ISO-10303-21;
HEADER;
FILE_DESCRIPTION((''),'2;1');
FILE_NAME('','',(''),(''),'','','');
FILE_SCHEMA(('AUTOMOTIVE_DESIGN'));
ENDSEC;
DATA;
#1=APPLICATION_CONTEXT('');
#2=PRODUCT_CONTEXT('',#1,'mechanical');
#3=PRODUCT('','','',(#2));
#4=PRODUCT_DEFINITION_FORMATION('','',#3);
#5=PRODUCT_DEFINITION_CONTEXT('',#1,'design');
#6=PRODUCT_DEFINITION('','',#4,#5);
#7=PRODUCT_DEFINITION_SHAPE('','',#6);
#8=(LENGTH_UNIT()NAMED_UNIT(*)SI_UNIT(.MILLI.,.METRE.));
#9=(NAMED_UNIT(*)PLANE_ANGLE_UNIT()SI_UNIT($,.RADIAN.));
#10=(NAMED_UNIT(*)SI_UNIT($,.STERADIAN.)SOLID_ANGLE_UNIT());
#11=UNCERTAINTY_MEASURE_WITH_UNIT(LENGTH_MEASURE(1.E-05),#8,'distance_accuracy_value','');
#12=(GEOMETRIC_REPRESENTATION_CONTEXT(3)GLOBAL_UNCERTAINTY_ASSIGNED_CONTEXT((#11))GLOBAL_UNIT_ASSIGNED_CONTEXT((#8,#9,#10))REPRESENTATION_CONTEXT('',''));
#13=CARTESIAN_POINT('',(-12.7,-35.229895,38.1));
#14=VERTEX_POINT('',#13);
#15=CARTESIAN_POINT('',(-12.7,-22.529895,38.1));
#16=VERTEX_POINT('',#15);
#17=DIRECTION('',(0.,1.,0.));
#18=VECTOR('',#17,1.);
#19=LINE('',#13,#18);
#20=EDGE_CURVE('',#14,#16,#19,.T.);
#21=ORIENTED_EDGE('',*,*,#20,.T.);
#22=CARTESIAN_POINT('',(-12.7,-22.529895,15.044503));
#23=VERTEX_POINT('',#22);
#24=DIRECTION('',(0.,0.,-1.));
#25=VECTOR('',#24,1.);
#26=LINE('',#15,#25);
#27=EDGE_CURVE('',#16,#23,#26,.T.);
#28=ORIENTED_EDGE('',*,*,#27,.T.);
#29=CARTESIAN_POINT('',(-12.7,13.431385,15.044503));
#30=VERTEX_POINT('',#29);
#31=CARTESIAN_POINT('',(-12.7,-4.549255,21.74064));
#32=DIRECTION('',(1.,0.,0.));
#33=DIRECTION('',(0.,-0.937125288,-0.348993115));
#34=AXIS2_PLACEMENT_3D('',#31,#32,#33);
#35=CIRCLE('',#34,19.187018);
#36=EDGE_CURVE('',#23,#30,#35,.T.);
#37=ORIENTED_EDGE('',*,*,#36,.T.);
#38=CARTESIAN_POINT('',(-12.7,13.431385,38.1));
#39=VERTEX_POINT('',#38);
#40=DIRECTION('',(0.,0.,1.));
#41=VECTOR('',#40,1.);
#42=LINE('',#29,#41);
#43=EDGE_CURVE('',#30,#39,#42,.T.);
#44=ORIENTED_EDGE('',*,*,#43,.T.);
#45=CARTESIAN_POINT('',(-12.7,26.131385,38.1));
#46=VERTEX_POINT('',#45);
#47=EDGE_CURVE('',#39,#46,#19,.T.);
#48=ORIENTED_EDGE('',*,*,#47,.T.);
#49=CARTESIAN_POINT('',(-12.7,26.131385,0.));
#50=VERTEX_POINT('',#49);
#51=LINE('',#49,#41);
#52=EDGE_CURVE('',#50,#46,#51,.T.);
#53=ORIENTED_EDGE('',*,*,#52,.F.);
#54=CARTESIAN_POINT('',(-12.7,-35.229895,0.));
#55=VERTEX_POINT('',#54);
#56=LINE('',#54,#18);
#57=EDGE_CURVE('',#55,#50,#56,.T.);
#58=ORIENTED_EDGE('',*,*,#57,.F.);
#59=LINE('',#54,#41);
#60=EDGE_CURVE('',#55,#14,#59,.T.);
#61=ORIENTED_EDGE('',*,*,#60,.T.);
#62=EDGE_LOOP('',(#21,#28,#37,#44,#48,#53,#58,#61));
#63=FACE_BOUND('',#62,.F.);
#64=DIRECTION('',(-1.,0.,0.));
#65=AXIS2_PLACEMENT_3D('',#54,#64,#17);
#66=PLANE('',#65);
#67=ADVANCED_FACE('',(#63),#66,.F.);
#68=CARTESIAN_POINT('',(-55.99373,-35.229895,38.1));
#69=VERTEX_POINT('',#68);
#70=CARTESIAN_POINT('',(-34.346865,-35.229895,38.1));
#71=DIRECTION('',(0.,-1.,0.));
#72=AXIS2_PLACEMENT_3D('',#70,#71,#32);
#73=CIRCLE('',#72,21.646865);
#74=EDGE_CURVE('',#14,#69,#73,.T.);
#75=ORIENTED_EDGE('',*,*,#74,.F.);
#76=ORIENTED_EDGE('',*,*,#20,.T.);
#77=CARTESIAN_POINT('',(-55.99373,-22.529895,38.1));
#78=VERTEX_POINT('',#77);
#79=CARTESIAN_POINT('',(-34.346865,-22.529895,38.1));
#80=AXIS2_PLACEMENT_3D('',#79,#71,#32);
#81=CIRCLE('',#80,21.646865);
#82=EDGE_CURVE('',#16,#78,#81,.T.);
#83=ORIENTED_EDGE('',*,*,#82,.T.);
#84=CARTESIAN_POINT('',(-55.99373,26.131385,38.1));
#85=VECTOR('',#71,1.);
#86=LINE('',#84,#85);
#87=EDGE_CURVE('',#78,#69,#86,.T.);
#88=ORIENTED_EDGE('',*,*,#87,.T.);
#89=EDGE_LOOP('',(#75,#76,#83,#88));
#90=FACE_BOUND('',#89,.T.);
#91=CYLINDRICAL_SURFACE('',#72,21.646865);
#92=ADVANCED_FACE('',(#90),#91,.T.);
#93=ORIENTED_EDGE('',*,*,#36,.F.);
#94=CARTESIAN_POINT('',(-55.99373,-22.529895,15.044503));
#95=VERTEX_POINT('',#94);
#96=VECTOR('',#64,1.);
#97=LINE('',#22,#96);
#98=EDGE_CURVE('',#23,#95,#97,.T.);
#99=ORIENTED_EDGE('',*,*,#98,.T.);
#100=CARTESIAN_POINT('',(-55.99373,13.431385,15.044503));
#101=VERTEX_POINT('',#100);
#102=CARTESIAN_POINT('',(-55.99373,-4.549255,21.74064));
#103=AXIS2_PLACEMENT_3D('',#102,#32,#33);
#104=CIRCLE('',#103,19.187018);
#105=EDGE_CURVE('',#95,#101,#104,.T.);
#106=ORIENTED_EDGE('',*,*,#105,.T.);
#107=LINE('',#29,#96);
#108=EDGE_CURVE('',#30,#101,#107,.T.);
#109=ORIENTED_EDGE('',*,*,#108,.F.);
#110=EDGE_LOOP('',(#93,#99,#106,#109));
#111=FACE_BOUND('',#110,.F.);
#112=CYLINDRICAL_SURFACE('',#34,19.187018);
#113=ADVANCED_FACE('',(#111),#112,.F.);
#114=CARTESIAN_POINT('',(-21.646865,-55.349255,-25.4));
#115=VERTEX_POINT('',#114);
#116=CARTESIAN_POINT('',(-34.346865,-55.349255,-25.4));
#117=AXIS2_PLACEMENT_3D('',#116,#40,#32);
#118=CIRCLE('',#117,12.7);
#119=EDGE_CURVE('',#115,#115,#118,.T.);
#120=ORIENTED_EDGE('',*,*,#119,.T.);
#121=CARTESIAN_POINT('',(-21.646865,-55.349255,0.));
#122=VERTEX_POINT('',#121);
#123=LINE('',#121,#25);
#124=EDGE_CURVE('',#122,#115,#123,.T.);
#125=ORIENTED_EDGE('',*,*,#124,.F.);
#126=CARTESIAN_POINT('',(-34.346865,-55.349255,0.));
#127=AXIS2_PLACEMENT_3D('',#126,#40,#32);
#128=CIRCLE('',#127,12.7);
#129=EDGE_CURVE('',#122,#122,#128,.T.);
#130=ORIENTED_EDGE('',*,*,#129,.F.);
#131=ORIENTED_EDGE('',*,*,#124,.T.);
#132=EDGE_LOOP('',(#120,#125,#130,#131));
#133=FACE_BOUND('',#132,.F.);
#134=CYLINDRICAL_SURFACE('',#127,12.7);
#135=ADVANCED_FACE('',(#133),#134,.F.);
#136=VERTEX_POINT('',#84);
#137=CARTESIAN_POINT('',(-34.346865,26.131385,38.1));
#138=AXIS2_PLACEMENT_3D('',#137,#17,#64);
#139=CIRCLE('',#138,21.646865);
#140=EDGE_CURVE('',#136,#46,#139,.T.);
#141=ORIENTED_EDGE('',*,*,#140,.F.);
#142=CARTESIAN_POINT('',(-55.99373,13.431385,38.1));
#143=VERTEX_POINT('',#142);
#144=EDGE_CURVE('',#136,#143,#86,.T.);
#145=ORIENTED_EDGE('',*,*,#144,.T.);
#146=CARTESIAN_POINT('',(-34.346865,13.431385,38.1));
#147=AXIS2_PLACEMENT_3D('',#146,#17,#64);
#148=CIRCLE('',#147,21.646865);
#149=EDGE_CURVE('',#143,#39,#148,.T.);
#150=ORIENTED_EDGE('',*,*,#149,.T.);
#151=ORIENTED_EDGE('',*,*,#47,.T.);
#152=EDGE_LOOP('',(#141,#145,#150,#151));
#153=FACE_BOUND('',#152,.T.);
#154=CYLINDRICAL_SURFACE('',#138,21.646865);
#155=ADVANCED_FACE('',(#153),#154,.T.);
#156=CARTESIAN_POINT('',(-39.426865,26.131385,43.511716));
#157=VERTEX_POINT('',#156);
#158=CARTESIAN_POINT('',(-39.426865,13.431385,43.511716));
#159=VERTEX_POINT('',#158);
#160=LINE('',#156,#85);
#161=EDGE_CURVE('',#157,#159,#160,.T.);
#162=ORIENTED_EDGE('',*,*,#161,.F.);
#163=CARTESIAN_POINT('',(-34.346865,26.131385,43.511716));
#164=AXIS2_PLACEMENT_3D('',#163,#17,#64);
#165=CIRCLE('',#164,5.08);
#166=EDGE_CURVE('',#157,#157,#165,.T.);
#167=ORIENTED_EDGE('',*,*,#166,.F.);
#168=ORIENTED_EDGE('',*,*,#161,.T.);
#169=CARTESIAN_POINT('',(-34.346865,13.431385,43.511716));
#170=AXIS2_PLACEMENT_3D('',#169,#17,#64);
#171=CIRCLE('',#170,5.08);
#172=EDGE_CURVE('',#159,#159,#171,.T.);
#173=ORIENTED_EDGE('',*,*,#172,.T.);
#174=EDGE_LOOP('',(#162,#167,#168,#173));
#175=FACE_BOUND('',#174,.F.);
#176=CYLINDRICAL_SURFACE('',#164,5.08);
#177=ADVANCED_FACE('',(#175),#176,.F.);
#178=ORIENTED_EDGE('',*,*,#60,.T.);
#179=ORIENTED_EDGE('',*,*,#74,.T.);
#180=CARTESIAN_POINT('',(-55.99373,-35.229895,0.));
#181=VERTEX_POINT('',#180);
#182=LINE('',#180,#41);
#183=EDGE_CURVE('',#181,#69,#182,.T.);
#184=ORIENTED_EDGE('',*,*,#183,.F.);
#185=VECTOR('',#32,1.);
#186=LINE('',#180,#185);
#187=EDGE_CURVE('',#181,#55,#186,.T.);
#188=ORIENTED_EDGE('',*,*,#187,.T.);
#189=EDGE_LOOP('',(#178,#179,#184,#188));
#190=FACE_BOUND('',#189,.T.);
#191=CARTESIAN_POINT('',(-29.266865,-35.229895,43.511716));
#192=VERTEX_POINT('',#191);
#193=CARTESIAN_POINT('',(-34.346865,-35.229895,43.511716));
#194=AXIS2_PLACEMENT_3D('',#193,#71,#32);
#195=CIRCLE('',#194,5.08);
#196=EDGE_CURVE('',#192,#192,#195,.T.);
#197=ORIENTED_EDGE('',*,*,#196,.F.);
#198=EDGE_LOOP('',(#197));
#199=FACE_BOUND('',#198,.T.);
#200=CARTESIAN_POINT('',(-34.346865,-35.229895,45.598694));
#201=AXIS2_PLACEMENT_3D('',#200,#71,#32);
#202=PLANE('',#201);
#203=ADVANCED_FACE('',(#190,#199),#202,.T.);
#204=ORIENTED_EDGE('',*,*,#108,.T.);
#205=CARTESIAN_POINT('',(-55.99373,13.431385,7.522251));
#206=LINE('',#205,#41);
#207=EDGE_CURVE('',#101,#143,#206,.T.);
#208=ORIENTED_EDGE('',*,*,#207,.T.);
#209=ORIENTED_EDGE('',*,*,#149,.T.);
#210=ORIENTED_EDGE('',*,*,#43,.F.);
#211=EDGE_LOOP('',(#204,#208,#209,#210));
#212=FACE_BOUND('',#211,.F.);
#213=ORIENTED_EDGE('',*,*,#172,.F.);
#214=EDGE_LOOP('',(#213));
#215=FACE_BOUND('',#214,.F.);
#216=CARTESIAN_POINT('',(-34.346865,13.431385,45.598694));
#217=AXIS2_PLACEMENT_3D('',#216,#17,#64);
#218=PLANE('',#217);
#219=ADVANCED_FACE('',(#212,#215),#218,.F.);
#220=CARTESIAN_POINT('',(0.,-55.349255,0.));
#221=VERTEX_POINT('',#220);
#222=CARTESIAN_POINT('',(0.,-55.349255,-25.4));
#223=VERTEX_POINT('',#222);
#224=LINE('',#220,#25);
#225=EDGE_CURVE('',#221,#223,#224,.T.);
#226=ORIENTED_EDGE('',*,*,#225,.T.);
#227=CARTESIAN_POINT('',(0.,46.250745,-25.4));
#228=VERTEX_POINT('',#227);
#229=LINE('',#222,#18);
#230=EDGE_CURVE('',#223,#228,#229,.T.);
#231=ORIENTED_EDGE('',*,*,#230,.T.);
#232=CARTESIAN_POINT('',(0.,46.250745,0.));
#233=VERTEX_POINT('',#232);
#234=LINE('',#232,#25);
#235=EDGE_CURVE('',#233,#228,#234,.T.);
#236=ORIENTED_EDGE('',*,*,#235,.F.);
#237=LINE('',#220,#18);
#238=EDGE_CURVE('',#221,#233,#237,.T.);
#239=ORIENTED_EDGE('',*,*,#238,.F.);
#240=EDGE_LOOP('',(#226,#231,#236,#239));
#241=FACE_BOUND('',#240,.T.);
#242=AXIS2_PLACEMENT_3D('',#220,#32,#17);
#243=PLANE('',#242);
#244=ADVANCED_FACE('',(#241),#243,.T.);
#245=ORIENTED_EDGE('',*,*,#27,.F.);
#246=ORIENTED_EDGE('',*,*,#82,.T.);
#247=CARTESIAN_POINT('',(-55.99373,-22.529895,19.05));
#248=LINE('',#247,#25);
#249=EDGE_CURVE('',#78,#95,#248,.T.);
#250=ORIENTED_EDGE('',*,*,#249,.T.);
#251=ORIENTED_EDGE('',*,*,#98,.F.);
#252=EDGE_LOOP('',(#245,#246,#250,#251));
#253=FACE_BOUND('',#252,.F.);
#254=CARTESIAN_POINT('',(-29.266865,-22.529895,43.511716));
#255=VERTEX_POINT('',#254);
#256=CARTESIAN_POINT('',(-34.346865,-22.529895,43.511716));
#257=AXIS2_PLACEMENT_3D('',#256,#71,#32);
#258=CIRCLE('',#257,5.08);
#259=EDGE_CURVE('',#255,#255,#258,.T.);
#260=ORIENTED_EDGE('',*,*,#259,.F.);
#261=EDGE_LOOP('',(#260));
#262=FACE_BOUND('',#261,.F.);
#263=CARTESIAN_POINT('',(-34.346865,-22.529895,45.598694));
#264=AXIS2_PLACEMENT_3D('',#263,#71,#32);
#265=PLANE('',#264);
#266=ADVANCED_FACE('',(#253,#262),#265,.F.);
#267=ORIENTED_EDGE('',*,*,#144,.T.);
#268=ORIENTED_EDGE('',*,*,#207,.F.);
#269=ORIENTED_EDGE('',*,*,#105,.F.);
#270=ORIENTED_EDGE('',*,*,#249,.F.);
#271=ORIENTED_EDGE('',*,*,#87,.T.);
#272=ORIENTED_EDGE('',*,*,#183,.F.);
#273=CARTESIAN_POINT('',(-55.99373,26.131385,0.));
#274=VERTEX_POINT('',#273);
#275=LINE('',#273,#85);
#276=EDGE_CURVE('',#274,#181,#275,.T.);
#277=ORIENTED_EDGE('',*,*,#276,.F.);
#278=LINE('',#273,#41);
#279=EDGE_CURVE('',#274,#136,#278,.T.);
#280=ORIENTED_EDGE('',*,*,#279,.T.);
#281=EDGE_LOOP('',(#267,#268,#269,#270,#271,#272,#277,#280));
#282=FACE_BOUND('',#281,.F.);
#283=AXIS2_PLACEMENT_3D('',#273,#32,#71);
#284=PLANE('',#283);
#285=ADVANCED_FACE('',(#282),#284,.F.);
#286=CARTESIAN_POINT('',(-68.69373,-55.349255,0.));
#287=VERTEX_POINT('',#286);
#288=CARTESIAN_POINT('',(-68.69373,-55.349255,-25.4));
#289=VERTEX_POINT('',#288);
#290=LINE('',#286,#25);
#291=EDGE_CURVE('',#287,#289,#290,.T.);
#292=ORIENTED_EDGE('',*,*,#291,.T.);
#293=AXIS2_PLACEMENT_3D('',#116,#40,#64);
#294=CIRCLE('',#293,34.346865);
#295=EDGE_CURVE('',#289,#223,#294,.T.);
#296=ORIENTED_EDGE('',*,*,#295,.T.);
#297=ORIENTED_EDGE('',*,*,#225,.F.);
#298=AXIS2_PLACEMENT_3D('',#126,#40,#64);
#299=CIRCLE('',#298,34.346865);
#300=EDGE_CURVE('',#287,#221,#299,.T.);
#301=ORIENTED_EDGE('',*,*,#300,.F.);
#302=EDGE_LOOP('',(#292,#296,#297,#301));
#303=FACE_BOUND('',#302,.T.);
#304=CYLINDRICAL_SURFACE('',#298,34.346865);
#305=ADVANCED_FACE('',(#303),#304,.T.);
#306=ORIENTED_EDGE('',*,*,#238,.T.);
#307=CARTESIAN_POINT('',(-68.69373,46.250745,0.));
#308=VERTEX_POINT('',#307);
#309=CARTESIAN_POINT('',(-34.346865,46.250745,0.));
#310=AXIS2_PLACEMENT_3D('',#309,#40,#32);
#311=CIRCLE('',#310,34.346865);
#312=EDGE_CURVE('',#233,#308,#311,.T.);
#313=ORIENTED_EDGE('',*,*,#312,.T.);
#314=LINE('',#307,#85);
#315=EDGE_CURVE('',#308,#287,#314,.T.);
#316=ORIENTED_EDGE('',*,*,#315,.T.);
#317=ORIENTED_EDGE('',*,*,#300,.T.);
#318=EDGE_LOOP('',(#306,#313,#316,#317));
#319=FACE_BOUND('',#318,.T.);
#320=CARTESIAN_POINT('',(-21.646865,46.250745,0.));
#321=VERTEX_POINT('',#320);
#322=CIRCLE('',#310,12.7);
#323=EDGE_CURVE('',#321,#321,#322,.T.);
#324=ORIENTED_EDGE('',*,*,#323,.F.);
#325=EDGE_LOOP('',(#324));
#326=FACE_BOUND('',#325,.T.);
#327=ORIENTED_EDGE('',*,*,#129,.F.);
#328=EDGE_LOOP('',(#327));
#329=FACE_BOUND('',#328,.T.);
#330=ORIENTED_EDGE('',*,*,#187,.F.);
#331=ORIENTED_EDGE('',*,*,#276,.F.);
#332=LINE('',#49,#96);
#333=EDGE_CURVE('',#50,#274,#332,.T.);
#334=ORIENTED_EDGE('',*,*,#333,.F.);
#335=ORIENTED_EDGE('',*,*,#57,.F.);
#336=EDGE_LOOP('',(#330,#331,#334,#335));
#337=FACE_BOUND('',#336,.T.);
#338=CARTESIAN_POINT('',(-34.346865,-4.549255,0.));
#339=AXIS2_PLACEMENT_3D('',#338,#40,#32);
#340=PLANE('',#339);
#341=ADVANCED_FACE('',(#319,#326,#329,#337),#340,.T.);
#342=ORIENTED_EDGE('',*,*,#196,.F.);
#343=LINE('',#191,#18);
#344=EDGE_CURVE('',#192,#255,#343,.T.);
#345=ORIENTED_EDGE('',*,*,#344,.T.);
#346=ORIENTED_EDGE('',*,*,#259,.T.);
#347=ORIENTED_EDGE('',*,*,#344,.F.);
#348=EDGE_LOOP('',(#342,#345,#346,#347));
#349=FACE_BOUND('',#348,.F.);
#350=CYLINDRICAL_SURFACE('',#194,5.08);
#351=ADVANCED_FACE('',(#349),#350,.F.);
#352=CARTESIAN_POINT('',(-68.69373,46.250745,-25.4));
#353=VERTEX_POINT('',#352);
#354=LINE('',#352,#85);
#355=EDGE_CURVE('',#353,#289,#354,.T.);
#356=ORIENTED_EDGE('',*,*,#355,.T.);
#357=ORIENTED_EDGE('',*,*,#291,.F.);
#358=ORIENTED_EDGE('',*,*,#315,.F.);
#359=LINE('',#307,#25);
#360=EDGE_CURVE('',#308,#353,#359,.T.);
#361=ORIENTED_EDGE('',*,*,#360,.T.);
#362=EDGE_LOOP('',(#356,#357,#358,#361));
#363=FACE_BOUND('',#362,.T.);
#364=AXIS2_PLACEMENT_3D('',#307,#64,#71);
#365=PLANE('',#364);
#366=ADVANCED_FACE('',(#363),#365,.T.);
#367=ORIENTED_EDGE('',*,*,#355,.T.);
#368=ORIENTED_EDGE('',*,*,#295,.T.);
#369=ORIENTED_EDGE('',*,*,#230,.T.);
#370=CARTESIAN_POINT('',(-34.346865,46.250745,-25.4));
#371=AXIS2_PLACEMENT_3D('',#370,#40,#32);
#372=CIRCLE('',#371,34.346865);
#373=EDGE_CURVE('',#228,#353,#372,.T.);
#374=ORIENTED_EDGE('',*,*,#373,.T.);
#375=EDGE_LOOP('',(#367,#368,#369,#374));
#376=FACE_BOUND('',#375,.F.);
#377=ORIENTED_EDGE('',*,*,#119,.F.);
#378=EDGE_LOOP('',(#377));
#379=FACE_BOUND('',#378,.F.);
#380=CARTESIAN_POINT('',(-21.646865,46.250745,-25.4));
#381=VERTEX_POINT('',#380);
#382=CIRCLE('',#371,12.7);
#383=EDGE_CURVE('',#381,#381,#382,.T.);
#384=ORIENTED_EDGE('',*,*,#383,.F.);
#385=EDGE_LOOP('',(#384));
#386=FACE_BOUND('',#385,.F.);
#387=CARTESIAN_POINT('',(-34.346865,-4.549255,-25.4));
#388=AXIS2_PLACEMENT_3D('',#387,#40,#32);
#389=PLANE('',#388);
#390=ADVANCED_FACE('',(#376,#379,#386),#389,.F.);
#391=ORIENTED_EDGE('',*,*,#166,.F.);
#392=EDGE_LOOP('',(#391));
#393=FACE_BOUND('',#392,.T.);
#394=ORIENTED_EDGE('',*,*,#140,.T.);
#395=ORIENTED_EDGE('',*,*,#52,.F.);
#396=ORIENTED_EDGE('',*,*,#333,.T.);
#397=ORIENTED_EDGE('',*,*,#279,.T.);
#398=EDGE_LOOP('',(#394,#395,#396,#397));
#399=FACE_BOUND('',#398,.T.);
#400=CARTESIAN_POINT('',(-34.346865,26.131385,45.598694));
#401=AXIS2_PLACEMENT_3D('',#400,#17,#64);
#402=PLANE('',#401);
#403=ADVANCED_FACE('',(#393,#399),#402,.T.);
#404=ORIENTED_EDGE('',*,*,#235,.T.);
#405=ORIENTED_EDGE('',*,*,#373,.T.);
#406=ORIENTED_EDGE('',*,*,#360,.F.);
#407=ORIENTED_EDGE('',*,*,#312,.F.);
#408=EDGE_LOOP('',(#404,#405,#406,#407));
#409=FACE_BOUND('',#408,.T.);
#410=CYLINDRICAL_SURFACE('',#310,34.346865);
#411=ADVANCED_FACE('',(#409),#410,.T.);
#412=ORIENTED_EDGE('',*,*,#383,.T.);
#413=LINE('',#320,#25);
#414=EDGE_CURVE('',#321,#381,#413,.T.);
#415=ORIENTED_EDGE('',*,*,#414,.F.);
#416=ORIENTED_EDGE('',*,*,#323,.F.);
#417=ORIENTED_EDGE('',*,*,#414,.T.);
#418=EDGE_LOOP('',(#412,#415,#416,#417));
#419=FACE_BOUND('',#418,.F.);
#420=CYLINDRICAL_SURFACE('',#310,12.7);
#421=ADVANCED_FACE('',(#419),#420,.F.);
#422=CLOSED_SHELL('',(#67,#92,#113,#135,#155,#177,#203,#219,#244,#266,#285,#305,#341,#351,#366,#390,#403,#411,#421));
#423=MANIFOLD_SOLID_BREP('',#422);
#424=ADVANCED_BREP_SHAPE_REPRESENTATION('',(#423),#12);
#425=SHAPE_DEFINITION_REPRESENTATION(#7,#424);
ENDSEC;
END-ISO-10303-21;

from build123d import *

# Parameters (mm, degrees)
F0_R     = 12.7
F1_DEPTH = 25.4
F3_DEPTH = 38.1
F5_DEPTH = 69.088
F7_R     = 5.08
F8_DEPTH = 12.7
F6_R     = 5.08
F9_DEPTH = 12.7


# Not quite as in the source:
# - a feature names something its author has since deleted; it is built from what else it names


with BuildPart() as f1:
    # F0 (on Top) → F1 (new body)
    with BuildSketch(Plane.XY):
        with BuildLine():
            Line((0, -55.3492553601), (0, 0))
            Line((0, 0), (0, 46.2507446399))
            ThreePointArc((0, 46.2507446399), (-34.3468652373, 80.5976098772), (-68.6937304746, 46.2507446399))
            Line((-68.6937304746, 46.2507446399), (-68.6937304746, -55.3492553601))
            ThreePointArc((-68.6937304746, -55.3492553601), (-34.3468652373, -89.6961205974), (0, -55.3492553601))
        make_face()
        with Locations((-34.3468652373, -55.3492553601)):
            Circle(F0_R, mode=Mode.SUBTRACT)
        with Locations((-34.3468652373, 46.2507446399)):
            Circle(F0_R, mode=Mode.SUBTRACT)
    extrude(amount=-F1_DEPTH)

    # F2 (on face) → F3 (join)
    with BuildSketch(Plane.XY):
        Polygon((-55.9937304746, 26.1313845437), (-55.9937304746, -4.5492553601), (-55.9937304746, -35.2298952639), (-12.7, -35.2298952639), (-12.7, -4.5492553601), (-12.7, 26.1313845437), align=None)
    extrude(amount=F3_DEPTH)

    # F4 (on face) → F5 (cut)
    with BuildSketch(Plane.YZ.offset(-12.7)):
        with BuildLine():
            Line((13.4313845437, 38.1), (-22.5298952639, 38.1))
            Line((-22.5298952639, 38.1), (-22.5298952639, 15.044502914))
            ThreePointArc((-22.5298952639, 15.044502914), (-4.5492553601, 2.5536219989), (13.4313845437, 15.044502914))
            Line((13.4313845437, 15.044502914), (13.4313845437, 38.1))
        make_face()
    extrude(amount=-F5_DEPTH, mode=Mode.SUBTRACT)

    # F7 (on face) → F8 (join)
    with BuildSketch(Plane(origin=(0, 26.1313845437, 0), x_dir=(-1, 0, 0), z_dir=(0, 1, 0))):
        with BuildLine():
            Line((12.7, 38.1), (55.9937304746, 38.1))
            ThreePointArc((55.9937304746, 38.1), (34.3468652373, 59.7468652373), (12.7, 38.1))
        make_face()
        with Locations((34.3468652373, 43.5117163093)):
            Circle(F7_R, mode=Mode.SUBTRACT)
    extrude(amount=-F8_DEPTH)

    # F6 (on face) → F9 (join)
    with BuildSketch(Plane.XZ.offset(35.2298952639)):
        with BuildLine():
            Line((-55.9937304746, 38.1), (-12.7, 38.1))
            ThreePointArc((-12.7, 38.1), (-34.3468652373, 59.7468652373), (-55.9937304746, 38.1))
        make_face()
        with Locations((-34.3468652373, 43.5117163093)):
            Circle(F6_R, mode=Mode.SUBTRACT)
    extrude(amount=-F9_DEPTH)


solid = f1.part
